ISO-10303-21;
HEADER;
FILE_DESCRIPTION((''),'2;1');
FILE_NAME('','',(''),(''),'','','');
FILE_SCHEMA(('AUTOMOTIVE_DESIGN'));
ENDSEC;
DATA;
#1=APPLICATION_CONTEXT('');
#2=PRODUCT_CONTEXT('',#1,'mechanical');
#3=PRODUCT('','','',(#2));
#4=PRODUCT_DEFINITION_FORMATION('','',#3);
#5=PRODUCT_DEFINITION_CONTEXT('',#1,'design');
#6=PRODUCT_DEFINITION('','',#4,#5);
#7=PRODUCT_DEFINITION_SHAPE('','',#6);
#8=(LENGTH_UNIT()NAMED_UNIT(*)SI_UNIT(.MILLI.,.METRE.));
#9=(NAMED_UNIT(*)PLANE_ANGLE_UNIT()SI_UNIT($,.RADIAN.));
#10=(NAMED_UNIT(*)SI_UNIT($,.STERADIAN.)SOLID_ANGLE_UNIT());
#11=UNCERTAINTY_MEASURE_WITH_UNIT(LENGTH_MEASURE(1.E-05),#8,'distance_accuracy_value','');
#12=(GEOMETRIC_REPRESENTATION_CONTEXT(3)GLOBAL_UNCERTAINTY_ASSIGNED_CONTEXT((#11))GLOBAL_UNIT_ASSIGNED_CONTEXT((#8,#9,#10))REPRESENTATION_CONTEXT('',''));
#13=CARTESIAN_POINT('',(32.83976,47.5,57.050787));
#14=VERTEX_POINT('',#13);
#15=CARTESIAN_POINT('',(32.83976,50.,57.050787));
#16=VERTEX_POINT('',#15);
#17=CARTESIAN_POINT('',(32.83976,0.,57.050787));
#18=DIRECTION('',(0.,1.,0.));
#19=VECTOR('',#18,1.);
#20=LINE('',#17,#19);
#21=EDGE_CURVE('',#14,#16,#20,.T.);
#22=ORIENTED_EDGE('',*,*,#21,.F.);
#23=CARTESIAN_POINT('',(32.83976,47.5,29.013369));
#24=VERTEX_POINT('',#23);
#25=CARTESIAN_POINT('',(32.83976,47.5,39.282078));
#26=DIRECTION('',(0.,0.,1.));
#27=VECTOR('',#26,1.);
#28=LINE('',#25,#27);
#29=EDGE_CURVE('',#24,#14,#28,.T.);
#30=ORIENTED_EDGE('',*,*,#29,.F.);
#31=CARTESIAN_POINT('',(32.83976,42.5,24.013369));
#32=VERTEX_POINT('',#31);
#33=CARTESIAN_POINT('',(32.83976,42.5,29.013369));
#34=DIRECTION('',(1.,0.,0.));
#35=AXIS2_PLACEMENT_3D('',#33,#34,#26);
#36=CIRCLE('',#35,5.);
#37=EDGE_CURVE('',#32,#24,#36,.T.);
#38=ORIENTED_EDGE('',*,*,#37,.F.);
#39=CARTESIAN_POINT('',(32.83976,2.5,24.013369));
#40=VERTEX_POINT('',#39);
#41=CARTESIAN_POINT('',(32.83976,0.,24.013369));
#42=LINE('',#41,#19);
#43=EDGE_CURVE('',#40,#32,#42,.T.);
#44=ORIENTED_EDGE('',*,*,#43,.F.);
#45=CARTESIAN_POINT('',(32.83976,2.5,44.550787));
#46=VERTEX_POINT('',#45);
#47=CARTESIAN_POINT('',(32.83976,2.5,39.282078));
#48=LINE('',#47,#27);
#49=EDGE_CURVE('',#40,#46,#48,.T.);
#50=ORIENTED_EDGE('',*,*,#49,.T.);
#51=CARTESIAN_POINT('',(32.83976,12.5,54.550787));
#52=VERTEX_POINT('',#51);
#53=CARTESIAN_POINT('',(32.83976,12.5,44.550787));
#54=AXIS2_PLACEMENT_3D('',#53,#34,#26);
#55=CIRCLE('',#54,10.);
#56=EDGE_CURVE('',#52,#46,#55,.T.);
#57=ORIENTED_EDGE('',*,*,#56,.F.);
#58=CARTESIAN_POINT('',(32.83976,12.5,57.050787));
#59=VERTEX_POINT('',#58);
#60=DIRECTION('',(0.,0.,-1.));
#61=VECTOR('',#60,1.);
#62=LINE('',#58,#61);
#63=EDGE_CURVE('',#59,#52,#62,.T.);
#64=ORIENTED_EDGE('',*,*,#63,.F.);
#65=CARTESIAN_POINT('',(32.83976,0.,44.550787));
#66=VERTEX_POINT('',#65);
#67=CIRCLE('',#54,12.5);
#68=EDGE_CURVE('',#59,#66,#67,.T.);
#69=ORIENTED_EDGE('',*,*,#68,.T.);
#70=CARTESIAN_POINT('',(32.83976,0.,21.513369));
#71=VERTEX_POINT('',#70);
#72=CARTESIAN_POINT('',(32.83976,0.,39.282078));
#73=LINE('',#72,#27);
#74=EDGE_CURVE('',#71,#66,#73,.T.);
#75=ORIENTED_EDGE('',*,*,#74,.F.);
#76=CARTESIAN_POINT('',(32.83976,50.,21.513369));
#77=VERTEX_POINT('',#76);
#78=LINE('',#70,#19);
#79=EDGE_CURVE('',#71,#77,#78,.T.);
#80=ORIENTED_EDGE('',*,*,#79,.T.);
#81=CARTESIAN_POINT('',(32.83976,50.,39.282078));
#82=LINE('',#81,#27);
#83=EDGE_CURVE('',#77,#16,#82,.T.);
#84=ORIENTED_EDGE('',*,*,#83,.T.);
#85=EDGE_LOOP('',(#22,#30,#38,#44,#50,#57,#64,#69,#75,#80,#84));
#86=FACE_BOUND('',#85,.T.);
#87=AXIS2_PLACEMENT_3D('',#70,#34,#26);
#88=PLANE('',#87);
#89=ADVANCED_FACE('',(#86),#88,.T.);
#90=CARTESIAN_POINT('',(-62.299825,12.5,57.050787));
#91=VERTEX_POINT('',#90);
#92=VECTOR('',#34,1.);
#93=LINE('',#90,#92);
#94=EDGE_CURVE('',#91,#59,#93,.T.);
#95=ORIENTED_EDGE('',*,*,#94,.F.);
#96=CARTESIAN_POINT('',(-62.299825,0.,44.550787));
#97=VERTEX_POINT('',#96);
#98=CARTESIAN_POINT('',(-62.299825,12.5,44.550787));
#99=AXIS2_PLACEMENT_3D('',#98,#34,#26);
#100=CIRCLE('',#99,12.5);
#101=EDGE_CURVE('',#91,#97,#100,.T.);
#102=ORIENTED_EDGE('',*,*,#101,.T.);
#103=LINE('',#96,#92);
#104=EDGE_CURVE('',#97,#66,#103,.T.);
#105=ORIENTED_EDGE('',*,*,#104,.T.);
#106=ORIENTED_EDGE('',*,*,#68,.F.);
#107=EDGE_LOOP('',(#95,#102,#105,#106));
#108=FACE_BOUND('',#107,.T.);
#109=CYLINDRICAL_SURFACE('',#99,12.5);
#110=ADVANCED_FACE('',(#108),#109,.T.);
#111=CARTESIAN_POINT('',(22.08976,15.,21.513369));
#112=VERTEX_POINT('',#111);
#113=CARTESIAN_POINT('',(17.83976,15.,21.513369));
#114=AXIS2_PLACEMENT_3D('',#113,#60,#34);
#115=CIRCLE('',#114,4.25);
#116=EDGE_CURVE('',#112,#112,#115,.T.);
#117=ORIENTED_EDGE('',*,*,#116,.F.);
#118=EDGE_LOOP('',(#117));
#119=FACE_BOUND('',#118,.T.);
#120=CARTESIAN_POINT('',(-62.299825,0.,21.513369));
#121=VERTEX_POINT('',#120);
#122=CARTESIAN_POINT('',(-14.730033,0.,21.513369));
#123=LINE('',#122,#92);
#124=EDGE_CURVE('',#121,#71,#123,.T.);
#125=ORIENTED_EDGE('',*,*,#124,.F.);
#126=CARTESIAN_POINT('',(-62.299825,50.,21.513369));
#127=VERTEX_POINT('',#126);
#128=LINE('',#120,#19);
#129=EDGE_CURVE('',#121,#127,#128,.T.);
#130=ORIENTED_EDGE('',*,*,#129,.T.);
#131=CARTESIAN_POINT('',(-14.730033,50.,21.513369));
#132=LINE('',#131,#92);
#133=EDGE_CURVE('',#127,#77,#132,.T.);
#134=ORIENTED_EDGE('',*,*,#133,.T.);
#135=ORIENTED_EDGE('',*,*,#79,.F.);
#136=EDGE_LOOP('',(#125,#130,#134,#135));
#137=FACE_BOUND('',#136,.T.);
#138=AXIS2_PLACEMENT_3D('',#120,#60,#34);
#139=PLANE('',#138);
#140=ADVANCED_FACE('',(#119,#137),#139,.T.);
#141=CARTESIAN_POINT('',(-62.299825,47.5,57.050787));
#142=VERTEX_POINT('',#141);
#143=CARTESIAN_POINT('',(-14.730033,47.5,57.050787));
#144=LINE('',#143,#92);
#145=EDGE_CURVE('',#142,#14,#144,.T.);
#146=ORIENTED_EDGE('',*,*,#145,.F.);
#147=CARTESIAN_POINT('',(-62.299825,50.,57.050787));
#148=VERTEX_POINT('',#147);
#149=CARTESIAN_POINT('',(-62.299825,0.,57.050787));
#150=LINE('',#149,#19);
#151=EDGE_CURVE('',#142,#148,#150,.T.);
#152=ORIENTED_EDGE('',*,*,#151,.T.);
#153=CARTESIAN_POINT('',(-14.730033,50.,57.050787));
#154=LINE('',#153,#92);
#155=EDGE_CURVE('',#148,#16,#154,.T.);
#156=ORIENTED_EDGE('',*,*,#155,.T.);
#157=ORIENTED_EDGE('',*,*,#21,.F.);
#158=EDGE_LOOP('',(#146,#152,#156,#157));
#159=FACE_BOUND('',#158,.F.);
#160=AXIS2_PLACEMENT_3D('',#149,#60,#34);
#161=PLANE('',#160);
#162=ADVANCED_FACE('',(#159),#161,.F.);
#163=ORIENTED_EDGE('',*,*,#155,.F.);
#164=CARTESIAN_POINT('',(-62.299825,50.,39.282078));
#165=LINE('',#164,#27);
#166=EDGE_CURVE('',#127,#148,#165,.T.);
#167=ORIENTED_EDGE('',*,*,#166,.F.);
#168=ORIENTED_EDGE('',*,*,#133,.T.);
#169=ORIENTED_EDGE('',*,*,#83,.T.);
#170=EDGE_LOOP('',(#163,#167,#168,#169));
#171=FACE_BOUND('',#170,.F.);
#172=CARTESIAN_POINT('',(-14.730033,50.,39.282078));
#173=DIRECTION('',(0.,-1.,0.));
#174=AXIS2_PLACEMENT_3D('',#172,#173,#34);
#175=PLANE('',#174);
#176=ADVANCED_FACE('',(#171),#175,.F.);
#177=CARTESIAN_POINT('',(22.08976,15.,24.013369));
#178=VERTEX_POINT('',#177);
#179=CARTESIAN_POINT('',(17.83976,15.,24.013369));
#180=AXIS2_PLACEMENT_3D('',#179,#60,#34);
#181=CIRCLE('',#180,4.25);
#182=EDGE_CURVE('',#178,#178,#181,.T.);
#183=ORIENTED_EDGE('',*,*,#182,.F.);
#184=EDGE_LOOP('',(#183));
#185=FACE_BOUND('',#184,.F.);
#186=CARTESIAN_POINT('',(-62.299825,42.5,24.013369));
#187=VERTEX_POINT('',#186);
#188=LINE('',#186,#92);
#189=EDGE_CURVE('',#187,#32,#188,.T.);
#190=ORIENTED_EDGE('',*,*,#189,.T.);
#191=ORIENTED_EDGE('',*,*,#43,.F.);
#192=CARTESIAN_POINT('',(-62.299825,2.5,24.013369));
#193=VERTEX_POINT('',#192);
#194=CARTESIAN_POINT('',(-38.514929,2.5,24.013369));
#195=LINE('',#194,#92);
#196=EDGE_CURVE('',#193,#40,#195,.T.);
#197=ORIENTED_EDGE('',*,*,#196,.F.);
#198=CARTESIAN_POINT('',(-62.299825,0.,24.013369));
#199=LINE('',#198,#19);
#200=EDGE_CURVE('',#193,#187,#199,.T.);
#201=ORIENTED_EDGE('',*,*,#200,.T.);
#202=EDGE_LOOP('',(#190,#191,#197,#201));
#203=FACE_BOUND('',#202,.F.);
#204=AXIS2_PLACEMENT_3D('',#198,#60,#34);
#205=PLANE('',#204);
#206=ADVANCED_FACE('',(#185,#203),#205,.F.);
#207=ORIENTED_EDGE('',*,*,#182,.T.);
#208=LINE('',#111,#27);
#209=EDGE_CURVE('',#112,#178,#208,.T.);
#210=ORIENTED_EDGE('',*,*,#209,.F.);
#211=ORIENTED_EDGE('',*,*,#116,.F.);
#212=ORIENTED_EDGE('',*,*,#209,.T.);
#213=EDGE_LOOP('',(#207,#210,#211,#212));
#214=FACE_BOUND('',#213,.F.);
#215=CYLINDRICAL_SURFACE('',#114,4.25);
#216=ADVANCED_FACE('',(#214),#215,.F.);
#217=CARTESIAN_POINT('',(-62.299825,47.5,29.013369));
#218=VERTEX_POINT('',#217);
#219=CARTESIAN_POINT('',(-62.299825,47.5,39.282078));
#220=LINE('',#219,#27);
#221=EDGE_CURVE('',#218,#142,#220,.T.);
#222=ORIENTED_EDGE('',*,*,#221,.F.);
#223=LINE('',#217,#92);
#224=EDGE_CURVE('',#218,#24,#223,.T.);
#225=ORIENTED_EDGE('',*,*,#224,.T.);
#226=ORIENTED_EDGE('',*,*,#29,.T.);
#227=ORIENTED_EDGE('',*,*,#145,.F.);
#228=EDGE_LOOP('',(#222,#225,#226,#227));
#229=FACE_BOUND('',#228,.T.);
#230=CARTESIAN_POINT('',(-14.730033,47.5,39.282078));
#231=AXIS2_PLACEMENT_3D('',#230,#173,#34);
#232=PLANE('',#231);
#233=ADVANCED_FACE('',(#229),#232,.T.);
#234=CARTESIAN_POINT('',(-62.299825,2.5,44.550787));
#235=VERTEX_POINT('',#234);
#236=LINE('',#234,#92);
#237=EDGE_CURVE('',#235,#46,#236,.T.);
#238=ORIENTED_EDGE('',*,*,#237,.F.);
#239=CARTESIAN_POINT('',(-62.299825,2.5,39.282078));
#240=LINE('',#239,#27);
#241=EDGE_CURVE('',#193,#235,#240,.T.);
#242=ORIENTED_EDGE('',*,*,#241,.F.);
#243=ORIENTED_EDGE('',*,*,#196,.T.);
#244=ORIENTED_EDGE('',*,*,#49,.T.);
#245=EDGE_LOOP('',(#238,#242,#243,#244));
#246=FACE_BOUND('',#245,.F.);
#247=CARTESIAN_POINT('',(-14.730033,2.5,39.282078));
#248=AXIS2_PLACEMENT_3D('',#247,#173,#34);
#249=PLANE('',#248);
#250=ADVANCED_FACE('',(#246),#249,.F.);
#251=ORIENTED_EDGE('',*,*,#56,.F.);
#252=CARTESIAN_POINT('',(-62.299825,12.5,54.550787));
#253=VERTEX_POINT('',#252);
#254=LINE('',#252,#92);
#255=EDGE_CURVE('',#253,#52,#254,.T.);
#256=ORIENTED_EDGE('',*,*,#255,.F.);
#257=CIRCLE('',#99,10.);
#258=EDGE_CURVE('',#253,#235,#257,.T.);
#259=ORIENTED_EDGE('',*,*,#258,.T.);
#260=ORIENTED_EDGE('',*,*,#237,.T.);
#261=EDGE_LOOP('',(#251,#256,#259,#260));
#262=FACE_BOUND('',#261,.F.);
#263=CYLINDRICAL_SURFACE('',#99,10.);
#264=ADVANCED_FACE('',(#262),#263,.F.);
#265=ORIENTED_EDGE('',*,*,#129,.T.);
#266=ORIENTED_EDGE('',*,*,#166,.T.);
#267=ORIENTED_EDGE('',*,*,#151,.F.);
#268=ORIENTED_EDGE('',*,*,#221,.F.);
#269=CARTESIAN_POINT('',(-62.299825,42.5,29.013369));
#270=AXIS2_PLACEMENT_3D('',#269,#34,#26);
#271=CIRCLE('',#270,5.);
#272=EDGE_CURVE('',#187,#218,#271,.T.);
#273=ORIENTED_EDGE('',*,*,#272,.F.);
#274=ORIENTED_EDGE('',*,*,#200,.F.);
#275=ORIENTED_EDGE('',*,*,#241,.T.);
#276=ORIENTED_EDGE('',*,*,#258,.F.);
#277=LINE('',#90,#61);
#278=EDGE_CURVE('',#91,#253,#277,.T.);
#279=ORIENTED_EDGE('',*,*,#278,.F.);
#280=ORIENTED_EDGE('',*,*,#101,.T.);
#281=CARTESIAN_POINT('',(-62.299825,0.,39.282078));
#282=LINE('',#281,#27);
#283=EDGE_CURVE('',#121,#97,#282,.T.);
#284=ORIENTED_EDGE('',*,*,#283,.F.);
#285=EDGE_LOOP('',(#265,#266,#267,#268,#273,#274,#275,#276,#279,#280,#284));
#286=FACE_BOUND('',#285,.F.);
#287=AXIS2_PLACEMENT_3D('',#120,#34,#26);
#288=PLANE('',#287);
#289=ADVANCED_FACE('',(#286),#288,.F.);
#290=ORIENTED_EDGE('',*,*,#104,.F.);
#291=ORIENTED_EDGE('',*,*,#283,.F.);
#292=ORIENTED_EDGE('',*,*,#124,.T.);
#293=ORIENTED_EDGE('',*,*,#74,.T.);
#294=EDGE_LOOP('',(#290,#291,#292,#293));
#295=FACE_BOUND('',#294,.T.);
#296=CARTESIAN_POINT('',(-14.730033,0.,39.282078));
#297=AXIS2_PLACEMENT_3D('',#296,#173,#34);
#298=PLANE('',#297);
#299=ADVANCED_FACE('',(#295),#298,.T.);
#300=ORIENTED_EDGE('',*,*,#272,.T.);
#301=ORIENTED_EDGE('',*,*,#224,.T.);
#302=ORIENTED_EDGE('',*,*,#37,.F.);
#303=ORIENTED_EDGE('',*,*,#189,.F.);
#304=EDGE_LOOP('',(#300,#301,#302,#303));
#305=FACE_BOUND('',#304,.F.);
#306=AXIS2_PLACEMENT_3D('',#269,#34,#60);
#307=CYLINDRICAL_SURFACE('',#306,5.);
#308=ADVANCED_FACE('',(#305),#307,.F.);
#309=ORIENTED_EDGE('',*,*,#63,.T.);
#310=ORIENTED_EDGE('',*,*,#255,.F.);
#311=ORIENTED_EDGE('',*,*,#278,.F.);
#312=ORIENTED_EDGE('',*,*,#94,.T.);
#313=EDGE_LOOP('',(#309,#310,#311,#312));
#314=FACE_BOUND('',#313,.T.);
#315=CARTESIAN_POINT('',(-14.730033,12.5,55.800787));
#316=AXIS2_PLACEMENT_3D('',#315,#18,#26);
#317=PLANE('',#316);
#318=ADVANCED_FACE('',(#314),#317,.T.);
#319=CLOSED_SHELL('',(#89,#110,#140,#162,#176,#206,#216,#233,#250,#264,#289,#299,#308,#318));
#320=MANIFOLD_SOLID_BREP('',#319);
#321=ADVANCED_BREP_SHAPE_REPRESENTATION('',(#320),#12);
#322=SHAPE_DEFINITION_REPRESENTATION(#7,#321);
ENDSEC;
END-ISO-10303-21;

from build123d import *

# Parameters (mm, degrees)
F0_W     = 95.1395854354
F0_H     = 35.537417978
F1_DEPTH = 50
F2_R     = 12.5
F3_T     = 2.5
F4_R     = 5
F5_R     = 4.25
F6_DEPTH = 25


# Not quite as in the source:
# - a shell that OpenCascade refuses in one call is made with other operations: the cavity is built on its own and cut out


with BuildPart() as f1:
    # F0 (on Front) → F1 (new body)
    with BuildSketch(Plane.XZ):
        with Locations((-14.7300325334, 39.2820779234)):
            Rectangle(F0_W, F0_H)
    extrude(amount=-F1_DEPTH)

    # F2
    f2_edges = [f1.edges().sort_by_distance(p)[0] for p in [
        (-14.730033, 0, 57.050787),
    ]]
    fillet(f2_edges, radius=F2_R)

    # F3: shell of thickness 2.5, made by hand


with BuildPart() as f3_core1:
    # F3_t2: copy of F1
    add(f1.part)

    # the walls: a layer under each face that stays
    f3_faces = [f3_core1.faces().sort_by_distance(p)[0] for p in [
        (-14.7300325334, 3.6611652352, 53.3896216773),
        (-14.7300325334, 50, 39.2820779234),
        (-14.7300325334, 0, 33.0320779234),
        (-14.7300325334, 25, 21.5133689344),
    ]]
    thicken(f3_faces, amount=-F3_T, mode=Mode.SUBTRACT)


with BuildPart() as f1_1:
    add(f1.part)

    # what is left inside the walls is the cavity
    f3_cavity = [f3_core1.part.solids().sort_by_distance(p)[0] for p in [
        (-14.730033, 32.5, 24.038369),
    ]]
    add(f3_cavity, mode=Mode.SUBTRACT)

    # F4
    f4_edges = [f1_1.edges().sort_by_distance(p)[0] for p in [
        (-14.730033, 47.5, 24.013369),
    ]]
    fillet(f4_edges, radius=F4_R)

    # F5 (on face) → F6 (cut)
    with BuildSketch(Plane(origin=(0, 0, 21.5133689344), x_dir=(1, 0, 0), z_dir=(0, 0, -1))):
        with Locations((17.8397601843, -15)):
            Circle(F5_R)
    extrude(amount=-F6_DEPTH, mode=Mode.SUBTRACT)


solid = f1_1.part
